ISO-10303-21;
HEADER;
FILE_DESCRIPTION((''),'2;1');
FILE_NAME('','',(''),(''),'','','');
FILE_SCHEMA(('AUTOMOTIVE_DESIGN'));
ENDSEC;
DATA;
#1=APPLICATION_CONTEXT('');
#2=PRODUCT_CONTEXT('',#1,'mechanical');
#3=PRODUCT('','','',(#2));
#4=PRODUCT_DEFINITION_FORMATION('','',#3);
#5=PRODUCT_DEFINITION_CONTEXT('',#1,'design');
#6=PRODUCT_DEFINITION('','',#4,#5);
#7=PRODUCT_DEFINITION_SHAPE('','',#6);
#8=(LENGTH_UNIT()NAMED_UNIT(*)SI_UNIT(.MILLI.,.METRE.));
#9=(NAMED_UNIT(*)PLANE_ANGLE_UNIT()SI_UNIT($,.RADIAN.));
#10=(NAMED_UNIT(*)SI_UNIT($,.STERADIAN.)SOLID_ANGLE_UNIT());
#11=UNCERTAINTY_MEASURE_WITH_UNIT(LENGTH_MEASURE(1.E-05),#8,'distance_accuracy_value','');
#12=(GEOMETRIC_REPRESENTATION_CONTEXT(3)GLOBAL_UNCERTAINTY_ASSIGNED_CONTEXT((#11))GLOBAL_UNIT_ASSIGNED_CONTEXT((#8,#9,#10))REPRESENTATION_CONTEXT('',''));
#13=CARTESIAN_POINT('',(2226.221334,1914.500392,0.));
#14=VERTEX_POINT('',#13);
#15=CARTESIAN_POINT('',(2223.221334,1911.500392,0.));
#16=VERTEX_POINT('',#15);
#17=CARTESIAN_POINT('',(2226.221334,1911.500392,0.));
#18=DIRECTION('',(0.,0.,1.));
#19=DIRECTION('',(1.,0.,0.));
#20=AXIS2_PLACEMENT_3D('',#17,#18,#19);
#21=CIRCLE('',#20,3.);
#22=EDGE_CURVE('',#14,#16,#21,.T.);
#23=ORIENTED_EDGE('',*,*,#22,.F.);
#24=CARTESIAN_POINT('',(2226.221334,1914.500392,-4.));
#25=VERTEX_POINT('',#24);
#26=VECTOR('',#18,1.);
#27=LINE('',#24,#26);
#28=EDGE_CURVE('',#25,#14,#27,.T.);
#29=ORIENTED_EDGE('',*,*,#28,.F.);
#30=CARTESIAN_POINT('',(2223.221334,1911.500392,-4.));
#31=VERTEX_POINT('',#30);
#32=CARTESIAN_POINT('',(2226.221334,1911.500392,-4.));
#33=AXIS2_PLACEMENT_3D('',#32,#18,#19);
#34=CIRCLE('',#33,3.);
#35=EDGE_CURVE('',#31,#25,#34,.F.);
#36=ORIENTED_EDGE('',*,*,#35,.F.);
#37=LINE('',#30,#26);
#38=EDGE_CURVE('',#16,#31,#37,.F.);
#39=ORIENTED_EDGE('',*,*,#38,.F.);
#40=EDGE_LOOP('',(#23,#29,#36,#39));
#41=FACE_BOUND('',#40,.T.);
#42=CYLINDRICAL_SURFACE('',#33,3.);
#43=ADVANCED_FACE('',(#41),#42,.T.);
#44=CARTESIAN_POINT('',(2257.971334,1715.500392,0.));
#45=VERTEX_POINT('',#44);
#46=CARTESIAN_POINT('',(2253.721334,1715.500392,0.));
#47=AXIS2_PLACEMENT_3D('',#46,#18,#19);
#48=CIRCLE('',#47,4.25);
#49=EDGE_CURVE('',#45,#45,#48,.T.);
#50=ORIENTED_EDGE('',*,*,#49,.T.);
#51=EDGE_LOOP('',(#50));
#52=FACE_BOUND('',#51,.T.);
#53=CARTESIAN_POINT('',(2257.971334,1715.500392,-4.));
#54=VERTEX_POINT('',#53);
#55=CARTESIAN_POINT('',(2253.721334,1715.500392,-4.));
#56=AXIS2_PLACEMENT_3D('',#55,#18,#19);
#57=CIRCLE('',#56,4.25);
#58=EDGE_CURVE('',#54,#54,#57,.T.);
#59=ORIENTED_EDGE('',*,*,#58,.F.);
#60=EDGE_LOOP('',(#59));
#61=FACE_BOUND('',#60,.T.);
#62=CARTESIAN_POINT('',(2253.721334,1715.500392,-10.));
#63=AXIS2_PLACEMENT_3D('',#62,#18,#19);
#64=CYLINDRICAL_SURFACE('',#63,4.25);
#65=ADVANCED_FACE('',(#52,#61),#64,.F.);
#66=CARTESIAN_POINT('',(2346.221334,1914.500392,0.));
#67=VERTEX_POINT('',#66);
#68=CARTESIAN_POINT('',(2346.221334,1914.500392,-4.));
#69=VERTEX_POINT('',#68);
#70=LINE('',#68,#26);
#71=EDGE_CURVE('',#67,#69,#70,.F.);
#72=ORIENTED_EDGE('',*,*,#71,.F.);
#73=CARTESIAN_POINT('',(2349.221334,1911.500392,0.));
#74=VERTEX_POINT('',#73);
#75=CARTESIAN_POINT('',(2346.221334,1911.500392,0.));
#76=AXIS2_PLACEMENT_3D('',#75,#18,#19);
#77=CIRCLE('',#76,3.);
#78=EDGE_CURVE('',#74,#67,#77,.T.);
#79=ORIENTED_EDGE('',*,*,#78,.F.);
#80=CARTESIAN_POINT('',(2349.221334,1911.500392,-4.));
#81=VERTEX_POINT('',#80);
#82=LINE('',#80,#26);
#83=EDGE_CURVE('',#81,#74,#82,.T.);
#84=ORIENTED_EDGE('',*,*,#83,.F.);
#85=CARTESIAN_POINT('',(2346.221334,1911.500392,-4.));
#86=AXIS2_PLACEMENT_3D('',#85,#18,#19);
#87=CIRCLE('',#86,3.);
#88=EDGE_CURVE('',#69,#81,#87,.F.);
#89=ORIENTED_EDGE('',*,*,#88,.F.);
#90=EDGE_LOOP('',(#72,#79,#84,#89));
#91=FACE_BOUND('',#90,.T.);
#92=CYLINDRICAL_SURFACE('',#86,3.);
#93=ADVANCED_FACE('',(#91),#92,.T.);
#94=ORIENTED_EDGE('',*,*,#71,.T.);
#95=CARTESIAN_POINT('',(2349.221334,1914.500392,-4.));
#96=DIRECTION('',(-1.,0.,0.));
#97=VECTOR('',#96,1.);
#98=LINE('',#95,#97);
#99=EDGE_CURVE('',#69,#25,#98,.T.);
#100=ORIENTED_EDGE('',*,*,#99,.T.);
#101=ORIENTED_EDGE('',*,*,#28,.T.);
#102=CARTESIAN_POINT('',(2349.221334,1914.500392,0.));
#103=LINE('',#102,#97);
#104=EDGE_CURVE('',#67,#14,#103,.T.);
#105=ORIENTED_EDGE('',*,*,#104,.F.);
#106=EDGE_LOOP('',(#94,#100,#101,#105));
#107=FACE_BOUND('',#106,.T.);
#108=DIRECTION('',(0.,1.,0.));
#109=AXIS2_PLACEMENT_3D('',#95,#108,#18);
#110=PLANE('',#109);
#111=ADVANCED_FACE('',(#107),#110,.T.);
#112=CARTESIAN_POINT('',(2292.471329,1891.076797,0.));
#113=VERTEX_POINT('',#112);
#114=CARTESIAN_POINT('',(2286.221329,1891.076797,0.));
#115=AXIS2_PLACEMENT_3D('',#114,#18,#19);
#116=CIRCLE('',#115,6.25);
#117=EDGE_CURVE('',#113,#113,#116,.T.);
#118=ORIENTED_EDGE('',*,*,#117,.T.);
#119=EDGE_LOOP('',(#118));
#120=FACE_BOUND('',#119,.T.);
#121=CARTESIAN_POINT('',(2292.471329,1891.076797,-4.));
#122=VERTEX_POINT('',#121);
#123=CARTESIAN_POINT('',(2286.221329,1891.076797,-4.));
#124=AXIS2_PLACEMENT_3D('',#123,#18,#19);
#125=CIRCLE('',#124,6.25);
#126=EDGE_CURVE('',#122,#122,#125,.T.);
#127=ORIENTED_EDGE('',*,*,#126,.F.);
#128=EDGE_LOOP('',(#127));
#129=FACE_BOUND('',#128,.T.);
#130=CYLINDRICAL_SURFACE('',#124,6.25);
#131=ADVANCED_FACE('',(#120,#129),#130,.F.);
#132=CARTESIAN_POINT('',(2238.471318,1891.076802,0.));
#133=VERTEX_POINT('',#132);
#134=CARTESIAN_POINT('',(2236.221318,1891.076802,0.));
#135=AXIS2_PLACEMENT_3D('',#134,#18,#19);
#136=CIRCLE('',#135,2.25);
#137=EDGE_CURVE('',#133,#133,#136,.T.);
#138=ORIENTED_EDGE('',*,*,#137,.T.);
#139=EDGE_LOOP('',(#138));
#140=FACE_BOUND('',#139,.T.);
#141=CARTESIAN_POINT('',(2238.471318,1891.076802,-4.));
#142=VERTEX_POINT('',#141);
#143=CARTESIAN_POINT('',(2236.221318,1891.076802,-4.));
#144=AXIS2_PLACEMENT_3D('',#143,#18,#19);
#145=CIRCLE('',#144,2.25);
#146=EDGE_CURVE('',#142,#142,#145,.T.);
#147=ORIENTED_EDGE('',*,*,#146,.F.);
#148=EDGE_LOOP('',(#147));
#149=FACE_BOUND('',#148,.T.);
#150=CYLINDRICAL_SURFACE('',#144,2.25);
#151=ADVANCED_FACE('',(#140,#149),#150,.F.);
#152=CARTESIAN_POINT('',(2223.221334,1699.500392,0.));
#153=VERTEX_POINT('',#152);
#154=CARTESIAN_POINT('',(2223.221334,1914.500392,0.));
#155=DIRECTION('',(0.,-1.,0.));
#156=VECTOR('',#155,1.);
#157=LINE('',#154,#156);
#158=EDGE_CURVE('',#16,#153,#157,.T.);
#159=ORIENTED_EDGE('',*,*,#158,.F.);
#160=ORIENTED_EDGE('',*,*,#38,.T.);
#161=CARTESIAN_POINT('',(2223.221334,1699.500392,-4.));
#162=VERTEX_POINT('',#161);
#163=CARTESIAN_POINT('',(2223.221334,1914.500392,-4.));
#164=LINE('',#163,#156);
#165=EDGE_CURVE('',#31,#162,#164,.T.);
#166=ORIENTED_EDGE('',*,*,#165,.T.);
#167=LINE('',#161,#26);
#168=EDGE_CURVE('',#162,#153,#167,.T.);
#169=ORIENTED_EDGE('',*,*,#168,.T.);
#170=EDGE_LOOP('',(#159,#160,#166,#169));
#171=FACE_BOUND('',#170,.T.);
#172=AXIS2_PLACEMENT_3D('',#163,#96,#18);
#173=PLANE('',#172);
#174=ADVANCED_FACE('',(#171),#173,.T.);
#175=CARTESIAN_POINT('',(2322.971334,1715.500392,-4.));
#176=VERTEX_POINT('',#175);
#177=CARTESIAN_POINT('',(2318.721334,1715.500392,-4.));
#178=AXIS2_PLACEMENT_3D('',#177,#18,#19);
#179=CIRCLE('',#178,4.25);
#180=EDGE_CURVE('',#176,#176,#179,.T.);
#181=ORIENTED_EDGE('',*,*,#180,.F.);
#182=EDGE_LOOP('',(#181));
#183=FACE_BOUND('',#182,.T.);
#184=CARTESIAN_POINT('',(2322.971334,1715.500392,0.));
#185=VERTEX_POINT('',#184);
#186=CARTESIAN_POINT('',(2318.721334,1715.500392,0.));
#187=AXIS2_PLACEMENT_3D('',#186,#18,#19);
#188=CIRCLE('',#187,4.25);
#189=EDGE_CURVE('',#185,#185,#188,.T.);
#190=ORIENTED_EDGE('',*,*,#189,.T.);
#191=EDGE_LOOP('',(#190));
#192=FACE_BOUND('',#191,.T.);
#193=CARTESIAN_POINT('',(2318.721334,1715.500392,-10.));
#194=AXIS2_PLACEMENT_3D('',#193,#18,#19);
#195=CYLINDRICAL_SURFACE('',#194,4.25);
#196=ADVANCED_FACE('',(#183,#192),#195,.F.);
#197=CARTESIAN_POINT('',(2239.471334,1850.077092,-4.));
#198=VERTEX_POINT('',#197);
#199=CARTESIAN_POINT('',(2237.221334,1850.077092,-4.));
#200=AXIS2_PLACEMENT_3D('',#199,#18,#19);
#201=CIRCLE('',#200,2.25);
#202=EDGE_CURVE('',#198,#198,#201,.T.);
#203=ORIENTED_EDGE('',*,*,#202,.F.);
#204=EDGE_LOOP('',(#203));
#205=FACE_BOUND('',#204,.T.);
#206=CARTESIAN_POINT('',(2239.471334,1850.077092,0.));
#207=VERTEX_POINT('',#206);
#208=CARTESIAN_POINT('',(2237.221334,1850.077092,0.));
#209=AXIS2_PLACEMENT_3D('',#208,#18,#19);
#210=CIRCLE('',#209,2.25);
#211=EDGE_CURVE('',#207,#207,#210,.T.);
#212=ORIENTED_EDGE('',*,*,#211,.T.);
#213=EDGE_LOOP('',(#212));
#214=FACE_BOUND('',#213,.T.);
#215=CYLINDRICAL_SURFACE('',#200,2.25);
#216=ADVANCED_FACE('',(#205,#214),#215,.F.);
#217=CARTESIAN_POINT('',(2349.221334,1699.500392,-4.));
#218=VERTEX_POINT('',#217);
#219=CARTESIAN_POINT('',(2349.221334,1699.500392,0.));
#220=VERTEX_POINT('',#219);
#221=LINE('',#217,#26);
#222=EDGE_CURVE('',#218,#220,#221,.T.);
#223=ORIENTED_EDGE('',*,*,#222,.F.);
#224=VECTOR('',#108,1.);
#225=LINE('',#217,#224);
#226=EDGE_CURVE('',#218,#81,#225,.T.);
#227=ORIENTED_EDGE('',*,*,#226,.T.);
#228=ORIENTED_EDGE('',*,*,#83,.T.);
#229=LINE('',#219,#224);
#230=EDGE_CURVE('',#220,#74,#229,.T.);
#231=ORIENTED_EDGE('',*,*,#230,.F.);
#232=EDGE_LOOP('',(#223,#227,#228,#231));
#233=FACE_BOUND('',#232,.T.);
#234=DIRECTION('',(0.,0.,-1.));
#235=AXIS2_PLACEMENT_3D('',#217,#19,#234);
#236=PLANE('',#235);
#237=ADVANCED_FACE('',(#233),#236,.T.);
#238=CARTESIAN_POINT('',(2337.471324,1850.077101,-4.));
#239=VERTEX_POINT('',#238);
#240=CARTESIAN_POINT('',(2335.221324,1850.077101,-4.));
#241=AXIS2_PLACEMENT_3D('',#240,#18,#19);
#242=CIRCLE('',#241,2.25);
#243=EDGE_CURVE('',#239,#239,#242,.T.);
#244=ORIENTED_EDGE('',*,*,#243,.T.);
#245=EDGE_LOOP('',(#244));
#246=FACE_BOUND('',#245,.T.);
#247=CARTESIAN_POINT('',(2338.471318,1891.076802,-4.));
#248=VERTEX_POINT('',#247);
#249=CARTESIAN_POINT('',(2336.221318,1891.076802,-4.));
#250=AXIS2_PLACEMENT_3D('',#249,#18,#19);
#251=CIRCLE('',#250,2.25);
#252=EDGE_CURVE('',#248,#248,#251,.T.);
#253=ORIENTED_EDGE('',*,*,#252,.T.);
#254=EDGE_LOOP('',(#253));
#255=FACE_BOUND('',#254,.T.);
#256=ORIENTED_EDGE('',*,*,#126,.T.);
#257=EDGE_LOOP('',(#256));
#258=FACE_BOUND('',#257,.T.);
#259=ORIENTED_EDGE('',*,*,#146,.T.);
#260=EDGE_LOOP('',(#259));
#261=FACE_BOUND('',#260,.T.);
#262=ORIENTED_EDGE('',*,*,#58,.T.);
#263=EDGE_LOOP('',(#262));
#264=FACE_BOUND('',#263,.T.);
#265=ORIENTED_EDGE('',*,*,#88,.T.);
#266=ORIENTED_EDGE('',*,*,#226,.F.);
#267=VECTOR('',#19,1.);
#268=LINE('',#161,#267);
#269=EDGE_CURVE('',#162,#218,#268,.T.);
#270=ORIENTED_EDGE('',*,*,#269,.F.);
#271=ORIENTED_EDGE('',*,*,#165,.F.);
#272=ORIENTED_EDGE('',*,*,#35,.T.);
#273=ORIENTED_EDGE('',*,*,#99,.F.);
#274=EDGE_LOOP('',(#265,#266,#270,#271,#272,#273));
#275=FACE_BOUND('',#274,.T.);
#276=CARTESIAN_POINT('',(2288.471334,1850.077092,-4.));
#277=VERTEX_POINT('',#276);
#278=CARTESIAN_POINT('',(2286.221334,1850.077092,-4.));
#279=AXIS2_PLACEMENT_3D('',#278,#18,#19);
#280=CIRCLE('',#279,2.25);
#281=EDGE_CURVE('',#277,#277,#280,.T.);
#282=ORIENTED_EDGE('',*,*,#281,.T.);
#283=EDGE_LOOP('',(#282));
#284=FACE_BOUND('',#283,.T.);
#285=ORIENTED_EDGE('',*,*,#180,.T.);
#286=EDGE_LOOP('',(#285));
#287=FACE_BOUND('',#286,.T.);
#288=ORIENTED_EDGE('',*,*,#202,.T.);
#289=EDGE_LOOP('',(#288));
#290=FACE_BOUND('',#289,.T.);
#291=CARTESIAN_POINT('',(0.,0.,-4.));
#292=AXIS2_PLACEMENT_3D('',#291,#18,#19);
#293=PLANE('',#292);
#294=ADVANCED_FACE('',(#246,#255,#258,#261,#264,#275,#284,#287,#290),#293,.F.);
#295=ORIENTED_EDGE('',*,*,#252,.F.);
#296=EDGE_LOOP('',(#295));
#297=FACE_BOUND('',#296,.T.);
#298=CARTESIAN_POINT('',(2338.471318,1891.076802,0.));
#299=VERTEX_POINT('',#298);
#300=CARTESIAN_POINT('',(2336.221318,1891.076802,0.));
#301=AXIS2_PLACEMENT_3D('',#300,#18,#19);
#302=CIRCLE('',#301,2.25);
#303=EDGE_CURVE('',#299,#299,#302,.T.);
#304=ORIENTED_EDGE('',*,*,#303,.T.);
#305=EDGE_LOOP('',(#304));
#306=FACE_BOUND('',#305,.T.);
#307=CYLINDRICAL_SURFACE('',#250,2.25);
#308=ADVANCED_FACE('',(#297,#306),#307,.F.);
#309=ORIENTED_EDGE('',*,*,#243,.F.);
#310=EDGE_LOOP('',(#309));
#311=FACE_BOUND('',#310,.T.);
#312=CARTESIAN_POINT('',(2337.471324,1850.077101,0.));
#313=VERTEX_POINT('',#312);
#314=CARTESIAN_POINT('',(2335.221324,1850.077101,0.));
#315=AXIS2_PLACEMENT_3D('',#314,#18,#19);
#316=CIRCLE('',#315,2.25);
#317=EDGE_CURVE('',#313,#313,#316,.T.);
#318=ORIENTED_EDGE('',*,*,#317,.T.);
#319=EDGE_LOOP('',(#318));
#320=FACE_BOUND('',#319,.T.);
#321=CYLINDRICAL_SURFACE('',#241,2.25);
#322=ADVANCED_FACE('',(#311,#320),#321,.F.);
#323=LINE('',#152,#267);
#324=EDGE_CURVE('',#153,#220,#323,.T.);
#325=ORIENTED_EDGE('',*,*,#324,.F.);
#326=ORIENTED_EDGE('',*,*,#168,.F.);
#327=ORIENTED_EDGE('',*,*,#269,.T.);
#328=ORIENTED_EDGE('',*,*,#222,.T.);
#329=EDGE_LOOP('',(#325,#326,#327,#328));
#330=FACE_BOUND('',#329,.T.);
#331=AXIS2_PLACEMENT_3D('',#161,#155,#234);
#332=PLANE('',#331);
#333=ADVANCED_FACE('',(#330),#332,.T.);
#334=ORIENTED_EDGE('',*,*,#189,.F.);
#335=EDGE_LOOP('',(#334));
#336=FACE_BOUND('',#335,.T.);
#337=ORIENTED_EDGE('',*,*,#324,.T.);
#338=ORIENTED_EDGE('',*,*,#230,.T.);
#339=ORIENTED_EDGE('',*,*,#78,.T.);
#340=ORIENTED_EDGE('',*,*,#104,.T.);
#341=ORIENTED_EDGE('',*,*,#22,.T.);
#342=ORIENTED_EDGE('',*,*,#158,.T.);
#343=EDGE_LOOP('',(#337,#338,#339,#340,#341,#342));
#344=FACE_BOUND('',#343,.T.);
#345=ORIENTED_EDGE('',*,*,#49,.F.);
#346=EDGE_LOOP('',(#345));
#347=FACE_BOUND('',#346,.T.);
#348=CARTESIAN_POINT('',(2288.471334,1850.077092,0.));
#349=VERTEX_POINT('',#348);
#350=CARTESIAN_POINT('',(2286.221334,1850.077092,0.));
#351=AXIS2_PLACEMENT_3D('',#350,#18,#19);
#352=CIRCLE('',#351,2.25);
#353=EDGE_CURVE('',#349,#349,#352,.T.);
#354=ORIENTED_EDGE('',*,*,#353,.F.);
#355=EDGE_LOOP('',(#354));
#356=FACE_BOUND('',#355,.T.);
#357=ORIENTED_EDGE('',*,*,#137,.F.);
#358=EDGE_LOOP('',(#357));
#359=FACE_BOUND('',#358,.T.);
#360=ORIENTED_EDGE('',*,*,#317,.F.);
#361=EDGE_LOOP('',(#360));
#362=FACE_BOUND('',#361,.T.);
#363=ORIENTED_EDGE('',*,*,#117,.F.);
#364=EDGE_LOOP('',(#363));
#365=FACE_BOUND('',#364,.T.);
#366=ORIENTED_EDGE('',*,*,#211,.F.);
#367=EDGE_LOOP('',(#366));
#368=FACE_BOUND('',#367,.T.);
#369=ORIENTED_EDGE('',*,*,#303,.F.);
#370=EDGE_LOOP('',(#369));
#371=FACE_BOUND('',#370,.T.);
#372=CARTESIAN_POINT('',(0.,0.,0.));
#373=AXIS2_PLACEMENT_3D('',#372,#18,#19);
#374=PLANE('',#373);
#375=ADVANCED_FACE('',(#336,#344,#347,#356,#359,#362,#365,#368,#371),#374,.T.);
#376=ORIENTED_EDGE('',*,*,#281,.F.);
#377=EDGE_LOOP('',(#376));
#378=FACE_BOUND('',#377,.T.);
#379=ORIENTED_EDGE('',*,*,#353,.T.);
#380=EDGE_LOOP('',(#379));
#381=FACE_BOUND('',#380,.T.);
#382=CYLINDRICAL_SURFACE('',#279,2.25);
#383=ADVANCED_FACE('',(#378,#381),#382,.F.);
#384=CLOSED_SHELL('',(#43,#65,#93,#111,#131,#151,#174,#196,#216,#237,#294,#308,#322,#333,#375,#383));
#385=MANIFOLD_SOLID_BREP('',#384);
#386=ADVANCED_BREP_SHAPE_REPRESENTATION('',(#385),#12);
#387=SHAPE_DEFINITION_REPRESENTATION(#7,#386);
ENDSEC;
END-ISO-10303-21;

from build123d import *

# Parameters (mm, degrees)
MODEL_W               = 126
MODEL_H               = 215
MODEL_R               = 4.5
MODEL_R_2             = 6.25
MODEL_R_3             = 2.25
TABAN_FLAN_1_DEPTH    = 4
IZIM1_W               = 106.122730642
IZIM1_H               = 29.615645761
SEKME1_DEPTH          = 4
IZIM4_R               = 4.25
KES_EKSTR_ZYON1_DEPTH = 10
RADYUS1_R             = 3


# Sheet-metal steps are written as plain solids
with BuildPart() as part:
    # Model → Taban-Flanş1 (new body)
    with BuildSketch(Plane.XY):
        with Locations((2286.221333619, 1807.000391939)):
            Rectangle(MODEL_W, MODEL_H)
        with Locations((2253.766329036, 1716.390896724)):
            Circle(MODEL_R, mode=Mode.SUBTRACT)
        with Locations((2318.766329036, 1716.390896724)):
            Circle(MODEL_R, mode=Mode.SUBTRACT)
        with Locations((2286.221329024, 1891.076796715)):
            Circle(MODEL_R_2, mode=Mode.SUBTRACT)
        with Locations((2236.221317757, 1891.076801538)):
            Circle(MODEL_R_3, mode=Mode.SUBTRACT)
        with Locations((2336.221317757, 1891.076801538)):
            Circle(MODEL_R_3, mode=Mode.SUBTRACT)
        with Locations((2237.221333619, 1850.077091939)):
            Circle(MODEL_R_3, mode=Mode.SUBTRACT)
        with Locations((2286.221333601, 1850.077091925)):
            Circle(MODEL_R_3, mode=Mode.SUBTRACT)
        with Locations((2335.22132399, 1850.077101041)):
            Circle(MODEL_R_3, mode=Mode.SUBTRACT)
    extrude(amount=-TABAN_FLAN_1_DEPTH)

    # Çizim1 → Sekme1 (add)
    with BuildSketch(Plane.XY):
        with Locations((2283.753363139, 1720.312928828)):
            Rectangle(IZIM1_W, IZIM1_H)
    extrude(amount=-SEKME1_DEPTH)

    # Çizim4 → Kes-Ekstrüzyon1 (cut)
    with BuildSketch(Plane.XY):
        with Locations((2253.721333619, 1715.500391939)):
            Circle(IZIM4_R)
        with Locations((2318.721333619, 1715.500391939)):
            Circle(IZIM4_R)
    extrude(amount=-KES_EKSTR_ZYON1_DEPTH, mode=Mode.SUBTRACT)

    # Radyus1
    radyus1_edges = [part.edges().sort_by_distance(p)[0] for p in [
        (2223.221333619, 1914.500391939, -2),
        (2349.221333619, 1914.500391939, -2),
    ]]
    fillet(radyus1_edges, radius=RADYUS1_R)


solid = part.part
